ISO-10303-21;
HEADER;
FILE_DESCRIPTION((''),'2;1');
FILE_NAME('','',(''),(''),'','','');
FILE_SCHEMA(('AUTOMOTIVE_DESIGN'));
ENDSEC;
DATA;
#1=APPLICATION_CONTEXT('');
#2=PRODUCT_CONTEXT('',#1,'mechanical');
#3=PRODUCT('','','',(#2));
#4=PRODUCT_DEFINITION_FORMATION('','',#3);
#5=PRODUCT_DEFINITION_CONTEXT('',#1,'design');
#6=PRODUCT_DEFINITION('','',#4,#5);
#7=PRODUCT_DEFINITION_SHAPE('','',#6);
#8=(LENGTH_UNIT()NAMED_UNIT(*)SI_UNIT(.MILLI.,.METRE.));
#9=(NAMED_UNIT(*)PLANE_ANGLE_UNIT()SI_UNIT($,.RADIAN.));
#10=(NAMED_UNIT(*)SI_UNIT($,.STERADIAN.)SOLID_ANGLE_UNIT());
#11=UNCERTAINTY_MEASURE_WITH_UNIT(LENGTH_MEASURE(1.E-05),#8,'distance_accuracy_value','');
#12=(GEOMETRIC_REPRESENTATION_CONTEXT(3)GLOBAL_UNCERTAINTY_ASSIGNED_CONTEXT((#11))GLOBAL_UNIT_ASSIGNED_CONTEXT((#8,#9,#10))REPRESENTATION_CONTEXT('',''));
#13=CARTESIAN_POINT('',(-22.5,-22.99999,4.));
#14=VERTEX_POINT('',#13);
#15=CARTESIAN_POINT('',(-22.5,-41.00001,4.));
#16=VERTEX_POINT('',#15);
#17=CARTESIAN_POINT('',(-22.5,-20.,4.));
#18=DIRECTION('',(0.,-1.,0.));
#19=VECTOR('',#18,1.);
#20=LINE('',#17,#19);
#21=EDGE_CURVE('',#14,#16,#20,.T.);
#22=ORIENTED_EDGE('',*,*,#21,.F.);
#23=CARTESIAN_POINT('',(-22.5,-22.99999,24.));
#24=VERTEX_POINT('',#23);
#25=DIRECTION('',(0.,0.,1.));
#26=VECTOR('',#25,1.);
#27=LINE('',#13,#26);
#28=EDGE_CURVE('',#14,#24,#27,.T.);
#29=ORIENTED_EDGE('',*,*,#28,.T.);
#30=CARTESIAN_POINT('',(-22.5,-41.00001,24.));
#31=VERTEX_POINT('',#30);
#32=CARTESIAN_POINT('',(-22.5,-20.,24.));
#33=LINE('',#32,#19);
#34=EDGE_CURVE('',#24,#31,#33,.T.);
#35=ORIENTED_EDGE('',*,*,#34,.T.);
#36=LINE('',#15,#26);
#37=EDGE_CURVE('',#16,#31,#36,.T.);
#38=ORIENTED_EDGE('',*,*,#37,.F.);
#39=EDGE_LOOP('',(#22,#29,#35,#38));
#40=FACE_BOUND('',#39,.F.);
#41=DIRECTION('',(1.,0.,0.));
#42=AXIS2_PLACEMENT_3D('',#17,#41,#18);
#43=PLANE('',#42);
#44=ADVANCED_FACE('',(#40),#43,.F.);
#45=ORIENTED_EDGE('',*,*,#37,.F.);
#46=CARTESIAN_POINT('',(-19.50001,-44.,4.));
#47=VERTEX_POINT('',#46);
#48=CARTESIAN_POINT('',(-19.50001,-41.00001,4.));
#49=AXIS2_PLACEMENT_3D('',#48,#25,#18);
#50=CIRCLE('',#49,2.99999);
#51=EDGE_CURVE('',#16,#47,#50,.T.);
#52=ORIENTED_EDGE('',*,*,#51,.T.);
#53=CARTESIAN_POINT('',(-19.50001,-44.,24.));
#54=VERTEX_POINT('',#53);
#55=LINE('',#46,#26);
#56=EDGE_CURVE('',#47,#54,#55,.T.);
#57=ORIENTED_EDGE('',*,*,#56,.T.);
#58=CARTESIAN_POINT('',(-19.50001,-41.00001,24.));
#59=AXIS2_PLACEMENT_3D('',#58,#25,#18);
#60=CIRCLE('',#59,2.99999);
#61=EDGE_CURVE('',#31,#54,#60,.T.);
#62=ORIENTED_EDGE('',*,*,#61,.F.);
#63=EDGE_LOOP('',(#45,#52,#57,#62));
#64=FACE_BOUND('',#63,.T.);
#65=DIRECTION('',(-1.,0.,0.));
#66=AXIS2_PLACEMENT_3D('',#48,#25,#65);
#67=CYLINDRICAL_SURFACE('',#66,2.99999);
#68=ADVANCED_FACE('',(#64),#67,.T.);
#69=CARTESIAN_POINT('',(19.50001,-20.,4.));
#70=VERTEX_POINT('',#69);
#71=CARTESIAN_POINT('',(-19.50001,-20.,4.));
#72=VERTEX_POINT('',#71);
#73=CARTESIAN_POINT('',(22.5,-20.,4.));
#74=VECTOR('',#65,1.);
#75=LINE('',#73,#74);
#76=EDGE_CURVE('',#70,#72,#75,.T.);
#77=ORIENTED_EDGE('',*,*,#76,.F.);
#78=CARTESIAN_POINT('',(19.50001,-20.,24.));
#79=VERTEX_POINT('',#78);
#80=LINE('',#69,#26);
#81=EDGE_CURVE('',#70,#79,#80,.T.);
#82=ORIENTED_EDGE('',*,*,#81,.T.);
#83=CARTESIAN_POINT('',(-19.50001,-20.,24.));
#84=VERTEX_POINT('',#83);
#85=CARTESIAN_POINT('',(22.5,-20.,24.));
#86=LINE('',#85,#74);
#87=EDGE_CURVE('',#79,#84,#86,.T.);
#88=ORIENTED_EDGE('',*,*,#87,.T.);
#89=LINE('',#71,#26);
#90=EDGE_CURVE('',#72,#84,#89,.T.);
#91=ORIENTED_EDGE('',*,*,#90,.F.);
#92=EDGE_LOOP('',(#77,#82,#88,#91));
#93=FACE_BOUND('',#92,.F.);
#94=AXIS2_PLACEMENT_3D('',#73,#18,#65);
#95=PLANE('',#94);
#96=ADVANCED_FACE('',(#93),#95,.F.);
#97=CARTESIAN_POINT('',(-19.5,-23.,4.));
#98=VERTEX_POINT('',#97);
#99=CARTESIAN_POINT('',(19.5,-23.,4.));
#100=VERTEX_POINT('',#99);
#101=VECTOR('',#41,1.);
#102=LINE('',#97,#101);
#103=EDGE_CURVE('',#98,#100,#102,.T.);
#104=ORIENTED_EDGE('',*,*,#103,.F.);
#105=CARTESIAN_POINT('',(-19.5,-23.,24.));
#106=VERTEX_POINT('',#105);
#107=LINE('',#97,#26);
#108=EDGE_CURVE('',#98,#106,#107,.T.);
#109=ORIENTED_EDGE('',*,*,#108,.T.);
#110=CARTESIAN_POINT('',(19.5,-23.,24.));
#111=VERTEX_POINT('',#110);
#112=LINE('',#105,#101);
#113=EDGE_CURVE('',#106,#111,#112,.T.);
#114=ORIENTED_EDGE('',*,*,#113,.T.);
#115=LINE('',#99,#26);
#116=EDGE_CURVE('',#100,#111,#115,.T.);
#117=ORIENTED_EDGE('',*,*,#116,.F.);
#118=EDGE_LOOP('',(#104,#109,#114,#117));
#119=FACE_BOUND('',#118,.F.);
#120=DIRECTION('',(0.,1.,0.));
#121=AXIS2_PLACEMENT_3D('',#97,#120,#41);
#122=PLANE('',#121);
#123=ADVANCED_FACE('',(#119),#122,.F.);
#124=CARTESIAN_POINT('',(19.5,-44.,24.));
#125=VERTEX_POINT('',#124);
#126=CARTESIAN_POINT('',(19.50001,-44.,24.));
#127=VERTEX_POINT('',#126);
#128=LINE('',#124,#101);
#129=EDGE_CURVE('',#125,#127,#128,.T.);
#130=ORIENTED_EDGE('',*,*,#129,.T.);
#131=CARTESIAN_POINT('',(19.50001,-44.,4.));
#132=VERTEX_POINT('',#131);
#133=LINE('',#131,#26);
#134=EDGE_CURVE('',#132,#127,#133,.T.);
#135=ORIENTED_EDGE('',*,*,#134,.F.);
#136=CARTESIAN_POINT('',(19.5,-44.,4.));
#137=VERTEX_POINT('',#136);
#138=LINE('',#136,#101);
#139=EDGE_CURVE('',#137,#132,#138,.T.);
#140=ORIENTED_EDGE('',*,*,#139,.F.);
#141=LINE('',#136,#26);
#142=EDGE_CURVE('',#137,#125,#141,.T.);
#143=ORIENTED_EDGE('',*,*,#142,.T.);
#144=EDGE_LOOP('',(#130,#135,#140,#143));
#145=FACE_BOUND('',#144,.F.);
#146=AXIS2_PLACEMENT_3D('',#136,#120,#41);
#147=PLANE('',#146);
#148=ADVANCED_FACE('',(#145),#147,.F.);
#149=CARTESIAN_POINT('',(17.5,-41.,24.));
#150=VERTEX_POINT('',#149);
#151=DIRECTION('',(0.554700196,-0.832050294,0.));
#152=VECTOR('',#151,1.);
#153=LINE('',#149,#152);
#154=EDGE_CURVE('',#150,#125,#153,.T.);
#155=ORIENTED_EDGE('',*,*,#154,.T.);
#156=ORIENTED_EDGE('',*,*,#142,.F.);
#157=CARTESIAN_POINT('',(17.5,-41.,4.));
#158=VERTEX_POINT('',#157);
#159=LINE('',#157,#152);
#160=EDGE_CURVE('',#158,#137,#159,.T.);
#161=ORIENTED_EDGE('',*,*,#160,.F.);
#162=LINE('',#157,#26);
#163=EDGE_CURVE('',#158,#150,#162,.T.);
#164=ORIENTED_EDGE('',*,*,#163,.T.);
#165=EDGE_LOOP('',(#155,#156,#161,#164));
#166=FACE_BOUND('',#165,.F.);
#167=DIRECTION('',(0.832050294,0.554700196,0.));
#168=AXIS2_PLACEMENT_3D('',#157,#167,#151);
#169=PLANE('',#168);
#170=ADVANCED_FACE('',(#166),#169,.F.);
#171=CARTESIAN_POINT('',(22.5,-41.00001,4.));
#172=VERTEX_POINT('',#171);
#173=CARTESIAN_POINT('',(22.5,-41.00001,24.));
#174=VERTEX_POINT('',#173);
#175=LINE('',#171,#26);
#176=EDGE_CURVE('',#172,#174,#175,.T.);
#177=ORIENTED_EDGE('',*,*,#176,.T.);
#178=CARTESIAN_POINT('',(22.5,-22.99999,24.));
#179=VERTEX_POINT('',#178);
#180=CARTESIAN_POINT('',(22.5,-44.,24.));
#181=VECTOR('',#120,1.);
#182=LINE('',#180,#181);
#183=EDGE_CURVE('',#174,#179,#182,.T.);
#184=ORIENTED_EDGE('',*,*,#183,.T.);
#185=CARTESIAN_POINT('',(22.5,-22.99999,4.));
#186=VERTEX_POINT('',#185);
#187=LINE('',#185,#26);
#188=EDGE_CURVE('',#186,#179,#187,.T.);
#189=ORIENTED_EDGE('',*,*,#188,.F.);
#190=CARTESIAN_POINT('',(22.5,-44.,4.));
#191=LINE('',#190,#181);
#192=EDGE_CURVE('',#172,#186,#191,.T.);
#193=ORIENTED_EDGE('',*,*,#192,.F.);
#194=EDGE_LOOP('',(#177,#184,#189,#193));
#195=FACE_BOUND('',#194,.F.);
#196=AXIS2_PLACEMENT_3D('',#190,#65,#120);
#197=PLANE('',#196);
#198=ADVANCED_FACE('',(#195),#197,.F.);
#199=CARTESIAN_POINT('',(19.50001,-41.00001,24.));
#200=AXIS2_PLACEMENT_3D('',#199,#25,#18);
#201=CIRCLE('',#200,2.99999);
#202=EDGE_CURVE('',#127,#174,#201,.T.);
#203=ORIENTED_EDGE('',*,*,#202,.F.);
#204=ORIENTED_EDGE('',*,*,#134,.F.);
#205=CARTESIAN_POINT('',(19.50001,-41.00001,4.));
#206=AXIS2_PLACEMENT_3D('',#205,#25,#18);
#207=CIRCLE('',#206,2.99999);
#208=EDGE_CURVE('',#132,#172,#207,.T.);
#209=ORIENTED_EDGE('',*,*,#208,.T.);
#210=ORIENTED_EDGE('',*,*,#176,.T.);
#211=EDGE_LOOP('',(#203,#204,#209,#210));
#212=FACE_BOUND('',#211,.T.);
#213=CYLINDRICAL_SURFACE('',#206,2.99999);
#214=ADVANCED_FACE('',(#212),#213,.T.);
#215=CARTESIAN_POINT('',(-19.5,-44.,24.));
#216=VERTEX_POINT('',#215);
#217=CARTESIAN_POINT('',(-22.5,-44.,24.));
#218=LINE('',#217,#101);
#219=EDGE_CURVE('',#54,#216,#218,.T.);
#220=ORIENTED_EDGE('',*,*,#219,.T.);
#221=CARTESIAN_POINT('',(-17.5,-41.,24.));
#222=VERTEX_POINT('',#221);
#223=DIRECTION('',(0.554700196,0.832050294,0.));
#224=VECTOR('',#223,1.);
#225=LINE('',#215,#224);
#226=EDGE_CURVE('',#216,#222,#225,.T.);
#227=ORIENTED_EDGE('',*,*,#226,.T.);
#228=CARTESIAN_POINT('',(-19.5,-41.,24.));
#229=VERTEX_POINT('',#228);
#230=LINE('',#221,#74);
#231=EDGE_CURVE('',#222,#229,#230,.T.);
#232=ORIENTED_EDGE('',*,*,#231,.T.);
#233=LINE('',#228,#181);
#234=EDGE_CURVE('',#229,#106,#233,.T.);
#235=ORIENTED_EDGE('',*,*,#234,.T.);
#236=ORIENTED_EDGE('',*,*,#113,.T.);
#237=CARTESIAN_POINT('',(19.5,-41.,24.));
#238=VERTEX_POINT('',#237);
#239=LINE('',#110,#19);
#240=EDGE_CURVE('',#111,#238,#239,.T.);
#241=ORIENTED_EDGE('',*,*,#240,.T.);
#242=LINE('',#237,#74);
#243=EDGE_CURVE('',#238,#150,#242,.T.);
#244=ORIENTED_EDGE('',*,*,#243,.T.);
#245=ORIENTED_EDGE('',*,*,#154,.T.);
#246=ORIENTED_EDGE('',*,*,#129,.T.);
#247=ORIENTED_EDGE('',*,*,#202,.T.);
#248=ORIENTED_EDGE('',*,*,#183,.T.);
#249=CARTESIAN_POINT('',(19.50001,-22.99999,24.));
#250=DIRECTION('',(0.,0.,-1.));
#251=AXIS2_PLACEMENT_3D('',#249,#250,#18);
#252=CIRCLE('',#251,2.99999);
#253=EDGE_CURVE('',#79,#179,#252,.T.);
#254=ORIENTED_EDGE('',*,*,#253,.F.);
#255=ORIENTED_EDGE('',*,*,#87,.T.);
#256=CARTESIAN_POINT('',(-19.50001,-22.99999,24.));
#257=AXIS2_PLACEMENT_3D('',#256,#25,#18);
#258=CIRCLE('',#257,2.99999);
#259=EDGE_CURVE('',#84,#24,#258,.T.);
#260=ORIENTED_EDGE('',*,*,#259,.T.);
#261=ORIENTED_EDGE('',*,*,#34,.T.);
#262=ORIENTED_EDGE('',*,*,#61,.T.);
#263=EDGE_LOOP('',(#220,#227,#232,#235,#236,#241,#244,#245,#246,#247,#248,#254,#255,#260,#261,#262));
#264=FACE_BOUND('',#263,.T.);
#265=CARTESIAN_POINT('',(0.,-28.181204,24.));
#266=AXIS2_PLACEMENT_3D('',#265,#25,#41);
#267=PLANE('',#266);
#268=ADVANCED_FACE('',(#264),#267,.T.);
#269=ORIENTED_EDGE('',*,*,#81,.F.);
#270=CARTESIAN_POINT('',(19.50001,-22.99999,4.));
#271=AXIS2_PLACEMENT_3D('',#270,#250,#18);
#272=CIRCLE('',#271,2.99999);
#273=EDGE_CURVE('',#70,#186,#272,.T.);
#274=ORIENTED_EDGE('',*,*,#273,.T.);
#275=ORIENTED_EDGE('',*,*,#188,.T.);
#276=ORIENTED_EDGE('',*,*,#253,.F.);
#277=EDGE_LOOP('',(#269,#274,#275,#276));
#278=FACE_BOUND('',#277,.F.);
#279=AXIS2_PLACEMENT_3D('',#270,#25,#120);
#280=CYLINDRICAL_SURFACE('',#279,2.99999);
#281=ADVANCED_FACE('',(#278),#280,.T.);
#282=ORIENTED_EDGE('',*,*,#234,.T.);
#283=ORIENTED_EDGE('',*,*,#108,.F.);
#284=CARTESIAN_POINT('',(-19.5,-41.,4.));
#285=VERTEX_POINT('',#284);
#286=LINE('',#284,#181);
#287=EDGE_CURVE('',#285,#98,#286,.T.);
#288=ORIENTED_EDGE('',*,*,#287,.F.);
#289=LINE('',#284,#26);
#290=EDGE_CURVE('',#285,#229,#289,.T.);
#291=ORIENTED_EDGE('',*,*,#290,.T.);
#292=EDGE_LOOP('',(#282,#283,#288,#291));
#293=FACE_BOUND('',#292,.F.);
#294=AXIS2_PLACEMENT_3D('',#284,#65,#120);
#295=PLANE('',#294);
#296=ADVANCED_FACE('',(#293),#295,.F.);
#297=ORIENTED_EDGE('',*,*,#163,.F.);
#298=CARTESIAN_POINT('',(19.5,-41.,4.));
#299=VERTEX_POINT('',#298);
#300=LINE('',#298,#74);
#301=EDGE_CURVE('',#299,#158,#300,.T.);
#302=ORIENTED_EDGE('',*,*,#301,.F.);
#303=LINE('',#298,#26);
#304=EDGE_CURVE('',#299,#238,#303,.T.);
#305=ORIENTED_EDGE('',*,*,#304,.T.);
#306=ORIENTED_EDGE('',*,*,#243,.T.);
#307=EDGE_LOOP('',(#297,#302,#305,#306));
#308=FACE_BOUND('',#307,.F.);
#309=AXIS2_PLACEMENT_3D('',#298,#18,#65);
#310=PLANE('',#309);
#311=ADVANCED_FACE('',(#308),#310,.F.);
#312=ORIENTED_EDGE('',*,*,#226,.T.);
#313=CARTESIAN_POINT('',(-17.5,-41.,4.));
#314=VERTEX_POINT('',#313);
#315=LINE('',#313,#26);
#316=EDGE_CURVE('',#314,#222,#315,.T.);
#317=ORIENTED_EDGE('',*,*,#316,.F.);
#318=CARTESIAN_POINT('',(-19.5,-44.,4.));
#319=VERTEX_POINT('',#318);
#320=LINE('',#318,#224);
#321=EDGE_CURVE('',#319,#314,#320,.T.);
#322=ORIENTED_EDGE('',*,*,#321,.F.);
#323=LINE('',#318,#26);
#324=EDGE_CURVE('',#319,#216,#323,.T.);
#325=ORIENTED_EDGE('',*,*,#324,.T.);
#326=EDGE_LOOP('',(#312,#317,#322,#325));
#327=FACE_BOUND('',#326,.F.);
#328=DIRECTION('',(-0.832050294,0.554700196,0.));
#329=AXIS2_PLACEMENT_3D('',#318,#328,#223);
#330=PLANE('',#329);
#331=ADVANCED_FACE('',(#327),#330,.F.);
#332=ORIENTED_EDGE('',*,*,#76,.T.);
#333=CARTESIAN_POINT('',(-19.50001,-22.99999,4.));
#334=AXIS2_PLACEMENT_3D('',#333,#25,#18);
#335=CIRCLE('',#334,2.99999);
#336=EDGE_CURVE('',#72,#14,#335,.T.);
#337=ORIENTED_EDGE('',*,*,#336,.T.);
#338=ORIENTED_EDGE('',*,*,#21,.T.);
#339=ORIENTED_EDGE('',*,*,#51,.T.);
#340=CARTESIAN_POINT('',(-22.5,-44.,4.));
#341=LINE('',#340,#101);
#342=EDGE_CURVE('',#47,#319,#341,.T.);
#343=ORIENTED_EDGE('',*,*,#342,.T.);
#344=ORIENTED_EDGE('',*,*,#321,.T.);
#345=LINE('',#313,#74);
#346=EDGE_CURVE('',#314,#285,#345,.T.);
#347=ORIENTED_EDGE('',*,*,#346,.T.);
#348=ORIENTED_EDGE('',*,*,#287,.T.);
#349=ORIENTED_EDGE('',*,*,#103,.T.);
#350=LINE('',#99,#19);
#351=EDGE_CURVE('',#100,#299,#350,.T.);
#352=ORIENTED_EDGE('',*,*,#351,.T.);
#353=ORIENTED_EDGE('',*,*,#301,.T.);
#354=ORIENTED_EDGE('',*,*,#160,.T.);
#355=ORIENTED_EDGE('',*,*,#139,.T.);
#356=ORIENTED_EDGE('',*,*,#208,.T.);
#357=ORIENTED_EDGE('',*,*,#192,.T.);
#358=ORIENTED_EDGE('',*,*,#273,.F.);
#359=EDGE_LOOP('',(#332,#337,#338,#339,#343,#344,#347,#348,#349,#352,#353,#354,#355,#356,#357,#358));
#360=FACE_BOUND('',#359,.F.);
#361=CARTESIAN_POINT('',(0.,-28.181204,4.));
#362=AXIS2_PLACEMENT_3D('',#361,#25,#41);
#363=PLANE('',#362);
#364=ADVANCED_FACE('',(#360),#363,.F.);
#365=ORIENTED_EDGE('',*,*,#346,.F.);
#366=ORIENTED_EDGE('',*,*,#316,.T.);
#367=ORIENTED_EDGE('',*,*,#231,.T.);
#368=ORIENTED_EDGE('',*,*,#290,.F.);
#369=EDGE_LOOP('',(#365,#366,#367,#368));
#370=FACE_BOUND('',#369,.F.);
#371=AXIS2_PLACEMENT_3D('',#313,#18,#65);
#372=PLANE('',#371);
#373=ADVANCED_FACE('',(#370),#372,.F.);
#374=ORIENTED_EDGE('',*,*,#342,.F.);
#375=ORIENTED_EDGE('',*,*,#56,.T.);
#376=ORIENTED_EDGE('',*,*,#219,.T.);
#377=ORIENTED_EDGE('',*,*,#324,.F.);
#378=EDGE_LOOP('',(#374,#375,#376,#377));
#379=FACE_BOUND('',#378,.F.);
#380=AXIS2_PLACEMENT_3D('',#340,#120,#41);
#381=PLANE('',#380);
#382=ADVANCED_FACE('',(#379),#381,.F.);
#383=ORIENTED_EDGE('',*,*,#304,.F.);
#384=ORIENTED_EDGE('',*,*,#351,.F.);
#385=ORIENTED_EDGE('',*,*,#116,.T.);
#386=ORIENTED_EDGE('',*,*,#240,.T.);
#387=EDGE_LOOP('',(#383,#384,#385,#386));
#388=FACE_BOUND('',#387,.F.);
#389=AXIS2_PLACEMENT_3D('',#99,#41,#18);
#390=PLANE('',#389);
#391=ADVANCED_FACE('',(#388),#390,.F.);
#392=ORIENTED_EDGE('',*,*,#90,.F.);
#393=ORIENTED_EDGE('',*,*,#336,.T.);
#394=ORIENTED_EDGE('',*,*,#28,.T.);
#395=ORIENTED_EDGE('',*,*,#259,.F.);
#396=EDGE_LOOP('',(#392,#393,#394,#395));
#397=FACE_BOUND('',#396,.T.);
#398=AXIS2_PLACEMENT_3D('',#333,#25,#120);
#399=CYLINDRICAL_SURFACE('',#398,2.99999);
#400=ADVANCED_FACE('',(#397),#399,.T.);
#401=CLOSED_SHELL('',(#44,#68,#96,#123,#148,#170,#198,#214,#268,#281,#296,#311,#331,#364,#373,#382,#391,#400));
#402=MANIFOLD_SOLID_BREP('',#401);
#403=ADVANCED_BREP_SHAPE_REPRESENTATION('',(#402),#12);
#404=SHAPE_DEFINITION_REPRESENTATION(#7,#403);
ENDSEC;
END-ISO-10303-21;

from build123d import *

# Parameters (mm, degrees)
F1_DEPTH = 20
F2_ANGLE = 270
F3_R     = 2.99999


# Not quite as in the source:
# - a fillet or chamfer is up to 0.001 mm smaller than in the source, because OpenCascade refuses the exact size


with BuildPart() as f1:
    # F0 (on Front) → F1 (new body)
    with BuildSketch(Plane.XZ):
        Polygon((22.5, 24), (-22.5, 24), (-22.5, 0), (-19.5, 0), (-17.5, 3), (-19.5, 3), (-19.5, 21), (19.5, 21), (19.5, 3), (17.5, 3), (19.5, 0), (22.5, 0), align=None)
    extrude(amount=F1_DEPTH)


with BuildPart() as f1_1:
    # F2: moved
    add(f1.part.rotate(Axis((0, -20, 24), (1, 0, 0)), F2_ANGLE))

    # F3 (radius 3 in the source; OpenCascade refuses exactly that, so slightly less here)
    f3_edges = [f1_1.edges().sort_by_distance(p)[0] for p in [
        (-22.5, -20, 14),
        (-22.5, -44, 14),
        (22.5, -44, 14),
        (22.5, -20, 14),
    ]]
    fillet(f3_edges, radius=F3_R)


solid = f1_1.part
